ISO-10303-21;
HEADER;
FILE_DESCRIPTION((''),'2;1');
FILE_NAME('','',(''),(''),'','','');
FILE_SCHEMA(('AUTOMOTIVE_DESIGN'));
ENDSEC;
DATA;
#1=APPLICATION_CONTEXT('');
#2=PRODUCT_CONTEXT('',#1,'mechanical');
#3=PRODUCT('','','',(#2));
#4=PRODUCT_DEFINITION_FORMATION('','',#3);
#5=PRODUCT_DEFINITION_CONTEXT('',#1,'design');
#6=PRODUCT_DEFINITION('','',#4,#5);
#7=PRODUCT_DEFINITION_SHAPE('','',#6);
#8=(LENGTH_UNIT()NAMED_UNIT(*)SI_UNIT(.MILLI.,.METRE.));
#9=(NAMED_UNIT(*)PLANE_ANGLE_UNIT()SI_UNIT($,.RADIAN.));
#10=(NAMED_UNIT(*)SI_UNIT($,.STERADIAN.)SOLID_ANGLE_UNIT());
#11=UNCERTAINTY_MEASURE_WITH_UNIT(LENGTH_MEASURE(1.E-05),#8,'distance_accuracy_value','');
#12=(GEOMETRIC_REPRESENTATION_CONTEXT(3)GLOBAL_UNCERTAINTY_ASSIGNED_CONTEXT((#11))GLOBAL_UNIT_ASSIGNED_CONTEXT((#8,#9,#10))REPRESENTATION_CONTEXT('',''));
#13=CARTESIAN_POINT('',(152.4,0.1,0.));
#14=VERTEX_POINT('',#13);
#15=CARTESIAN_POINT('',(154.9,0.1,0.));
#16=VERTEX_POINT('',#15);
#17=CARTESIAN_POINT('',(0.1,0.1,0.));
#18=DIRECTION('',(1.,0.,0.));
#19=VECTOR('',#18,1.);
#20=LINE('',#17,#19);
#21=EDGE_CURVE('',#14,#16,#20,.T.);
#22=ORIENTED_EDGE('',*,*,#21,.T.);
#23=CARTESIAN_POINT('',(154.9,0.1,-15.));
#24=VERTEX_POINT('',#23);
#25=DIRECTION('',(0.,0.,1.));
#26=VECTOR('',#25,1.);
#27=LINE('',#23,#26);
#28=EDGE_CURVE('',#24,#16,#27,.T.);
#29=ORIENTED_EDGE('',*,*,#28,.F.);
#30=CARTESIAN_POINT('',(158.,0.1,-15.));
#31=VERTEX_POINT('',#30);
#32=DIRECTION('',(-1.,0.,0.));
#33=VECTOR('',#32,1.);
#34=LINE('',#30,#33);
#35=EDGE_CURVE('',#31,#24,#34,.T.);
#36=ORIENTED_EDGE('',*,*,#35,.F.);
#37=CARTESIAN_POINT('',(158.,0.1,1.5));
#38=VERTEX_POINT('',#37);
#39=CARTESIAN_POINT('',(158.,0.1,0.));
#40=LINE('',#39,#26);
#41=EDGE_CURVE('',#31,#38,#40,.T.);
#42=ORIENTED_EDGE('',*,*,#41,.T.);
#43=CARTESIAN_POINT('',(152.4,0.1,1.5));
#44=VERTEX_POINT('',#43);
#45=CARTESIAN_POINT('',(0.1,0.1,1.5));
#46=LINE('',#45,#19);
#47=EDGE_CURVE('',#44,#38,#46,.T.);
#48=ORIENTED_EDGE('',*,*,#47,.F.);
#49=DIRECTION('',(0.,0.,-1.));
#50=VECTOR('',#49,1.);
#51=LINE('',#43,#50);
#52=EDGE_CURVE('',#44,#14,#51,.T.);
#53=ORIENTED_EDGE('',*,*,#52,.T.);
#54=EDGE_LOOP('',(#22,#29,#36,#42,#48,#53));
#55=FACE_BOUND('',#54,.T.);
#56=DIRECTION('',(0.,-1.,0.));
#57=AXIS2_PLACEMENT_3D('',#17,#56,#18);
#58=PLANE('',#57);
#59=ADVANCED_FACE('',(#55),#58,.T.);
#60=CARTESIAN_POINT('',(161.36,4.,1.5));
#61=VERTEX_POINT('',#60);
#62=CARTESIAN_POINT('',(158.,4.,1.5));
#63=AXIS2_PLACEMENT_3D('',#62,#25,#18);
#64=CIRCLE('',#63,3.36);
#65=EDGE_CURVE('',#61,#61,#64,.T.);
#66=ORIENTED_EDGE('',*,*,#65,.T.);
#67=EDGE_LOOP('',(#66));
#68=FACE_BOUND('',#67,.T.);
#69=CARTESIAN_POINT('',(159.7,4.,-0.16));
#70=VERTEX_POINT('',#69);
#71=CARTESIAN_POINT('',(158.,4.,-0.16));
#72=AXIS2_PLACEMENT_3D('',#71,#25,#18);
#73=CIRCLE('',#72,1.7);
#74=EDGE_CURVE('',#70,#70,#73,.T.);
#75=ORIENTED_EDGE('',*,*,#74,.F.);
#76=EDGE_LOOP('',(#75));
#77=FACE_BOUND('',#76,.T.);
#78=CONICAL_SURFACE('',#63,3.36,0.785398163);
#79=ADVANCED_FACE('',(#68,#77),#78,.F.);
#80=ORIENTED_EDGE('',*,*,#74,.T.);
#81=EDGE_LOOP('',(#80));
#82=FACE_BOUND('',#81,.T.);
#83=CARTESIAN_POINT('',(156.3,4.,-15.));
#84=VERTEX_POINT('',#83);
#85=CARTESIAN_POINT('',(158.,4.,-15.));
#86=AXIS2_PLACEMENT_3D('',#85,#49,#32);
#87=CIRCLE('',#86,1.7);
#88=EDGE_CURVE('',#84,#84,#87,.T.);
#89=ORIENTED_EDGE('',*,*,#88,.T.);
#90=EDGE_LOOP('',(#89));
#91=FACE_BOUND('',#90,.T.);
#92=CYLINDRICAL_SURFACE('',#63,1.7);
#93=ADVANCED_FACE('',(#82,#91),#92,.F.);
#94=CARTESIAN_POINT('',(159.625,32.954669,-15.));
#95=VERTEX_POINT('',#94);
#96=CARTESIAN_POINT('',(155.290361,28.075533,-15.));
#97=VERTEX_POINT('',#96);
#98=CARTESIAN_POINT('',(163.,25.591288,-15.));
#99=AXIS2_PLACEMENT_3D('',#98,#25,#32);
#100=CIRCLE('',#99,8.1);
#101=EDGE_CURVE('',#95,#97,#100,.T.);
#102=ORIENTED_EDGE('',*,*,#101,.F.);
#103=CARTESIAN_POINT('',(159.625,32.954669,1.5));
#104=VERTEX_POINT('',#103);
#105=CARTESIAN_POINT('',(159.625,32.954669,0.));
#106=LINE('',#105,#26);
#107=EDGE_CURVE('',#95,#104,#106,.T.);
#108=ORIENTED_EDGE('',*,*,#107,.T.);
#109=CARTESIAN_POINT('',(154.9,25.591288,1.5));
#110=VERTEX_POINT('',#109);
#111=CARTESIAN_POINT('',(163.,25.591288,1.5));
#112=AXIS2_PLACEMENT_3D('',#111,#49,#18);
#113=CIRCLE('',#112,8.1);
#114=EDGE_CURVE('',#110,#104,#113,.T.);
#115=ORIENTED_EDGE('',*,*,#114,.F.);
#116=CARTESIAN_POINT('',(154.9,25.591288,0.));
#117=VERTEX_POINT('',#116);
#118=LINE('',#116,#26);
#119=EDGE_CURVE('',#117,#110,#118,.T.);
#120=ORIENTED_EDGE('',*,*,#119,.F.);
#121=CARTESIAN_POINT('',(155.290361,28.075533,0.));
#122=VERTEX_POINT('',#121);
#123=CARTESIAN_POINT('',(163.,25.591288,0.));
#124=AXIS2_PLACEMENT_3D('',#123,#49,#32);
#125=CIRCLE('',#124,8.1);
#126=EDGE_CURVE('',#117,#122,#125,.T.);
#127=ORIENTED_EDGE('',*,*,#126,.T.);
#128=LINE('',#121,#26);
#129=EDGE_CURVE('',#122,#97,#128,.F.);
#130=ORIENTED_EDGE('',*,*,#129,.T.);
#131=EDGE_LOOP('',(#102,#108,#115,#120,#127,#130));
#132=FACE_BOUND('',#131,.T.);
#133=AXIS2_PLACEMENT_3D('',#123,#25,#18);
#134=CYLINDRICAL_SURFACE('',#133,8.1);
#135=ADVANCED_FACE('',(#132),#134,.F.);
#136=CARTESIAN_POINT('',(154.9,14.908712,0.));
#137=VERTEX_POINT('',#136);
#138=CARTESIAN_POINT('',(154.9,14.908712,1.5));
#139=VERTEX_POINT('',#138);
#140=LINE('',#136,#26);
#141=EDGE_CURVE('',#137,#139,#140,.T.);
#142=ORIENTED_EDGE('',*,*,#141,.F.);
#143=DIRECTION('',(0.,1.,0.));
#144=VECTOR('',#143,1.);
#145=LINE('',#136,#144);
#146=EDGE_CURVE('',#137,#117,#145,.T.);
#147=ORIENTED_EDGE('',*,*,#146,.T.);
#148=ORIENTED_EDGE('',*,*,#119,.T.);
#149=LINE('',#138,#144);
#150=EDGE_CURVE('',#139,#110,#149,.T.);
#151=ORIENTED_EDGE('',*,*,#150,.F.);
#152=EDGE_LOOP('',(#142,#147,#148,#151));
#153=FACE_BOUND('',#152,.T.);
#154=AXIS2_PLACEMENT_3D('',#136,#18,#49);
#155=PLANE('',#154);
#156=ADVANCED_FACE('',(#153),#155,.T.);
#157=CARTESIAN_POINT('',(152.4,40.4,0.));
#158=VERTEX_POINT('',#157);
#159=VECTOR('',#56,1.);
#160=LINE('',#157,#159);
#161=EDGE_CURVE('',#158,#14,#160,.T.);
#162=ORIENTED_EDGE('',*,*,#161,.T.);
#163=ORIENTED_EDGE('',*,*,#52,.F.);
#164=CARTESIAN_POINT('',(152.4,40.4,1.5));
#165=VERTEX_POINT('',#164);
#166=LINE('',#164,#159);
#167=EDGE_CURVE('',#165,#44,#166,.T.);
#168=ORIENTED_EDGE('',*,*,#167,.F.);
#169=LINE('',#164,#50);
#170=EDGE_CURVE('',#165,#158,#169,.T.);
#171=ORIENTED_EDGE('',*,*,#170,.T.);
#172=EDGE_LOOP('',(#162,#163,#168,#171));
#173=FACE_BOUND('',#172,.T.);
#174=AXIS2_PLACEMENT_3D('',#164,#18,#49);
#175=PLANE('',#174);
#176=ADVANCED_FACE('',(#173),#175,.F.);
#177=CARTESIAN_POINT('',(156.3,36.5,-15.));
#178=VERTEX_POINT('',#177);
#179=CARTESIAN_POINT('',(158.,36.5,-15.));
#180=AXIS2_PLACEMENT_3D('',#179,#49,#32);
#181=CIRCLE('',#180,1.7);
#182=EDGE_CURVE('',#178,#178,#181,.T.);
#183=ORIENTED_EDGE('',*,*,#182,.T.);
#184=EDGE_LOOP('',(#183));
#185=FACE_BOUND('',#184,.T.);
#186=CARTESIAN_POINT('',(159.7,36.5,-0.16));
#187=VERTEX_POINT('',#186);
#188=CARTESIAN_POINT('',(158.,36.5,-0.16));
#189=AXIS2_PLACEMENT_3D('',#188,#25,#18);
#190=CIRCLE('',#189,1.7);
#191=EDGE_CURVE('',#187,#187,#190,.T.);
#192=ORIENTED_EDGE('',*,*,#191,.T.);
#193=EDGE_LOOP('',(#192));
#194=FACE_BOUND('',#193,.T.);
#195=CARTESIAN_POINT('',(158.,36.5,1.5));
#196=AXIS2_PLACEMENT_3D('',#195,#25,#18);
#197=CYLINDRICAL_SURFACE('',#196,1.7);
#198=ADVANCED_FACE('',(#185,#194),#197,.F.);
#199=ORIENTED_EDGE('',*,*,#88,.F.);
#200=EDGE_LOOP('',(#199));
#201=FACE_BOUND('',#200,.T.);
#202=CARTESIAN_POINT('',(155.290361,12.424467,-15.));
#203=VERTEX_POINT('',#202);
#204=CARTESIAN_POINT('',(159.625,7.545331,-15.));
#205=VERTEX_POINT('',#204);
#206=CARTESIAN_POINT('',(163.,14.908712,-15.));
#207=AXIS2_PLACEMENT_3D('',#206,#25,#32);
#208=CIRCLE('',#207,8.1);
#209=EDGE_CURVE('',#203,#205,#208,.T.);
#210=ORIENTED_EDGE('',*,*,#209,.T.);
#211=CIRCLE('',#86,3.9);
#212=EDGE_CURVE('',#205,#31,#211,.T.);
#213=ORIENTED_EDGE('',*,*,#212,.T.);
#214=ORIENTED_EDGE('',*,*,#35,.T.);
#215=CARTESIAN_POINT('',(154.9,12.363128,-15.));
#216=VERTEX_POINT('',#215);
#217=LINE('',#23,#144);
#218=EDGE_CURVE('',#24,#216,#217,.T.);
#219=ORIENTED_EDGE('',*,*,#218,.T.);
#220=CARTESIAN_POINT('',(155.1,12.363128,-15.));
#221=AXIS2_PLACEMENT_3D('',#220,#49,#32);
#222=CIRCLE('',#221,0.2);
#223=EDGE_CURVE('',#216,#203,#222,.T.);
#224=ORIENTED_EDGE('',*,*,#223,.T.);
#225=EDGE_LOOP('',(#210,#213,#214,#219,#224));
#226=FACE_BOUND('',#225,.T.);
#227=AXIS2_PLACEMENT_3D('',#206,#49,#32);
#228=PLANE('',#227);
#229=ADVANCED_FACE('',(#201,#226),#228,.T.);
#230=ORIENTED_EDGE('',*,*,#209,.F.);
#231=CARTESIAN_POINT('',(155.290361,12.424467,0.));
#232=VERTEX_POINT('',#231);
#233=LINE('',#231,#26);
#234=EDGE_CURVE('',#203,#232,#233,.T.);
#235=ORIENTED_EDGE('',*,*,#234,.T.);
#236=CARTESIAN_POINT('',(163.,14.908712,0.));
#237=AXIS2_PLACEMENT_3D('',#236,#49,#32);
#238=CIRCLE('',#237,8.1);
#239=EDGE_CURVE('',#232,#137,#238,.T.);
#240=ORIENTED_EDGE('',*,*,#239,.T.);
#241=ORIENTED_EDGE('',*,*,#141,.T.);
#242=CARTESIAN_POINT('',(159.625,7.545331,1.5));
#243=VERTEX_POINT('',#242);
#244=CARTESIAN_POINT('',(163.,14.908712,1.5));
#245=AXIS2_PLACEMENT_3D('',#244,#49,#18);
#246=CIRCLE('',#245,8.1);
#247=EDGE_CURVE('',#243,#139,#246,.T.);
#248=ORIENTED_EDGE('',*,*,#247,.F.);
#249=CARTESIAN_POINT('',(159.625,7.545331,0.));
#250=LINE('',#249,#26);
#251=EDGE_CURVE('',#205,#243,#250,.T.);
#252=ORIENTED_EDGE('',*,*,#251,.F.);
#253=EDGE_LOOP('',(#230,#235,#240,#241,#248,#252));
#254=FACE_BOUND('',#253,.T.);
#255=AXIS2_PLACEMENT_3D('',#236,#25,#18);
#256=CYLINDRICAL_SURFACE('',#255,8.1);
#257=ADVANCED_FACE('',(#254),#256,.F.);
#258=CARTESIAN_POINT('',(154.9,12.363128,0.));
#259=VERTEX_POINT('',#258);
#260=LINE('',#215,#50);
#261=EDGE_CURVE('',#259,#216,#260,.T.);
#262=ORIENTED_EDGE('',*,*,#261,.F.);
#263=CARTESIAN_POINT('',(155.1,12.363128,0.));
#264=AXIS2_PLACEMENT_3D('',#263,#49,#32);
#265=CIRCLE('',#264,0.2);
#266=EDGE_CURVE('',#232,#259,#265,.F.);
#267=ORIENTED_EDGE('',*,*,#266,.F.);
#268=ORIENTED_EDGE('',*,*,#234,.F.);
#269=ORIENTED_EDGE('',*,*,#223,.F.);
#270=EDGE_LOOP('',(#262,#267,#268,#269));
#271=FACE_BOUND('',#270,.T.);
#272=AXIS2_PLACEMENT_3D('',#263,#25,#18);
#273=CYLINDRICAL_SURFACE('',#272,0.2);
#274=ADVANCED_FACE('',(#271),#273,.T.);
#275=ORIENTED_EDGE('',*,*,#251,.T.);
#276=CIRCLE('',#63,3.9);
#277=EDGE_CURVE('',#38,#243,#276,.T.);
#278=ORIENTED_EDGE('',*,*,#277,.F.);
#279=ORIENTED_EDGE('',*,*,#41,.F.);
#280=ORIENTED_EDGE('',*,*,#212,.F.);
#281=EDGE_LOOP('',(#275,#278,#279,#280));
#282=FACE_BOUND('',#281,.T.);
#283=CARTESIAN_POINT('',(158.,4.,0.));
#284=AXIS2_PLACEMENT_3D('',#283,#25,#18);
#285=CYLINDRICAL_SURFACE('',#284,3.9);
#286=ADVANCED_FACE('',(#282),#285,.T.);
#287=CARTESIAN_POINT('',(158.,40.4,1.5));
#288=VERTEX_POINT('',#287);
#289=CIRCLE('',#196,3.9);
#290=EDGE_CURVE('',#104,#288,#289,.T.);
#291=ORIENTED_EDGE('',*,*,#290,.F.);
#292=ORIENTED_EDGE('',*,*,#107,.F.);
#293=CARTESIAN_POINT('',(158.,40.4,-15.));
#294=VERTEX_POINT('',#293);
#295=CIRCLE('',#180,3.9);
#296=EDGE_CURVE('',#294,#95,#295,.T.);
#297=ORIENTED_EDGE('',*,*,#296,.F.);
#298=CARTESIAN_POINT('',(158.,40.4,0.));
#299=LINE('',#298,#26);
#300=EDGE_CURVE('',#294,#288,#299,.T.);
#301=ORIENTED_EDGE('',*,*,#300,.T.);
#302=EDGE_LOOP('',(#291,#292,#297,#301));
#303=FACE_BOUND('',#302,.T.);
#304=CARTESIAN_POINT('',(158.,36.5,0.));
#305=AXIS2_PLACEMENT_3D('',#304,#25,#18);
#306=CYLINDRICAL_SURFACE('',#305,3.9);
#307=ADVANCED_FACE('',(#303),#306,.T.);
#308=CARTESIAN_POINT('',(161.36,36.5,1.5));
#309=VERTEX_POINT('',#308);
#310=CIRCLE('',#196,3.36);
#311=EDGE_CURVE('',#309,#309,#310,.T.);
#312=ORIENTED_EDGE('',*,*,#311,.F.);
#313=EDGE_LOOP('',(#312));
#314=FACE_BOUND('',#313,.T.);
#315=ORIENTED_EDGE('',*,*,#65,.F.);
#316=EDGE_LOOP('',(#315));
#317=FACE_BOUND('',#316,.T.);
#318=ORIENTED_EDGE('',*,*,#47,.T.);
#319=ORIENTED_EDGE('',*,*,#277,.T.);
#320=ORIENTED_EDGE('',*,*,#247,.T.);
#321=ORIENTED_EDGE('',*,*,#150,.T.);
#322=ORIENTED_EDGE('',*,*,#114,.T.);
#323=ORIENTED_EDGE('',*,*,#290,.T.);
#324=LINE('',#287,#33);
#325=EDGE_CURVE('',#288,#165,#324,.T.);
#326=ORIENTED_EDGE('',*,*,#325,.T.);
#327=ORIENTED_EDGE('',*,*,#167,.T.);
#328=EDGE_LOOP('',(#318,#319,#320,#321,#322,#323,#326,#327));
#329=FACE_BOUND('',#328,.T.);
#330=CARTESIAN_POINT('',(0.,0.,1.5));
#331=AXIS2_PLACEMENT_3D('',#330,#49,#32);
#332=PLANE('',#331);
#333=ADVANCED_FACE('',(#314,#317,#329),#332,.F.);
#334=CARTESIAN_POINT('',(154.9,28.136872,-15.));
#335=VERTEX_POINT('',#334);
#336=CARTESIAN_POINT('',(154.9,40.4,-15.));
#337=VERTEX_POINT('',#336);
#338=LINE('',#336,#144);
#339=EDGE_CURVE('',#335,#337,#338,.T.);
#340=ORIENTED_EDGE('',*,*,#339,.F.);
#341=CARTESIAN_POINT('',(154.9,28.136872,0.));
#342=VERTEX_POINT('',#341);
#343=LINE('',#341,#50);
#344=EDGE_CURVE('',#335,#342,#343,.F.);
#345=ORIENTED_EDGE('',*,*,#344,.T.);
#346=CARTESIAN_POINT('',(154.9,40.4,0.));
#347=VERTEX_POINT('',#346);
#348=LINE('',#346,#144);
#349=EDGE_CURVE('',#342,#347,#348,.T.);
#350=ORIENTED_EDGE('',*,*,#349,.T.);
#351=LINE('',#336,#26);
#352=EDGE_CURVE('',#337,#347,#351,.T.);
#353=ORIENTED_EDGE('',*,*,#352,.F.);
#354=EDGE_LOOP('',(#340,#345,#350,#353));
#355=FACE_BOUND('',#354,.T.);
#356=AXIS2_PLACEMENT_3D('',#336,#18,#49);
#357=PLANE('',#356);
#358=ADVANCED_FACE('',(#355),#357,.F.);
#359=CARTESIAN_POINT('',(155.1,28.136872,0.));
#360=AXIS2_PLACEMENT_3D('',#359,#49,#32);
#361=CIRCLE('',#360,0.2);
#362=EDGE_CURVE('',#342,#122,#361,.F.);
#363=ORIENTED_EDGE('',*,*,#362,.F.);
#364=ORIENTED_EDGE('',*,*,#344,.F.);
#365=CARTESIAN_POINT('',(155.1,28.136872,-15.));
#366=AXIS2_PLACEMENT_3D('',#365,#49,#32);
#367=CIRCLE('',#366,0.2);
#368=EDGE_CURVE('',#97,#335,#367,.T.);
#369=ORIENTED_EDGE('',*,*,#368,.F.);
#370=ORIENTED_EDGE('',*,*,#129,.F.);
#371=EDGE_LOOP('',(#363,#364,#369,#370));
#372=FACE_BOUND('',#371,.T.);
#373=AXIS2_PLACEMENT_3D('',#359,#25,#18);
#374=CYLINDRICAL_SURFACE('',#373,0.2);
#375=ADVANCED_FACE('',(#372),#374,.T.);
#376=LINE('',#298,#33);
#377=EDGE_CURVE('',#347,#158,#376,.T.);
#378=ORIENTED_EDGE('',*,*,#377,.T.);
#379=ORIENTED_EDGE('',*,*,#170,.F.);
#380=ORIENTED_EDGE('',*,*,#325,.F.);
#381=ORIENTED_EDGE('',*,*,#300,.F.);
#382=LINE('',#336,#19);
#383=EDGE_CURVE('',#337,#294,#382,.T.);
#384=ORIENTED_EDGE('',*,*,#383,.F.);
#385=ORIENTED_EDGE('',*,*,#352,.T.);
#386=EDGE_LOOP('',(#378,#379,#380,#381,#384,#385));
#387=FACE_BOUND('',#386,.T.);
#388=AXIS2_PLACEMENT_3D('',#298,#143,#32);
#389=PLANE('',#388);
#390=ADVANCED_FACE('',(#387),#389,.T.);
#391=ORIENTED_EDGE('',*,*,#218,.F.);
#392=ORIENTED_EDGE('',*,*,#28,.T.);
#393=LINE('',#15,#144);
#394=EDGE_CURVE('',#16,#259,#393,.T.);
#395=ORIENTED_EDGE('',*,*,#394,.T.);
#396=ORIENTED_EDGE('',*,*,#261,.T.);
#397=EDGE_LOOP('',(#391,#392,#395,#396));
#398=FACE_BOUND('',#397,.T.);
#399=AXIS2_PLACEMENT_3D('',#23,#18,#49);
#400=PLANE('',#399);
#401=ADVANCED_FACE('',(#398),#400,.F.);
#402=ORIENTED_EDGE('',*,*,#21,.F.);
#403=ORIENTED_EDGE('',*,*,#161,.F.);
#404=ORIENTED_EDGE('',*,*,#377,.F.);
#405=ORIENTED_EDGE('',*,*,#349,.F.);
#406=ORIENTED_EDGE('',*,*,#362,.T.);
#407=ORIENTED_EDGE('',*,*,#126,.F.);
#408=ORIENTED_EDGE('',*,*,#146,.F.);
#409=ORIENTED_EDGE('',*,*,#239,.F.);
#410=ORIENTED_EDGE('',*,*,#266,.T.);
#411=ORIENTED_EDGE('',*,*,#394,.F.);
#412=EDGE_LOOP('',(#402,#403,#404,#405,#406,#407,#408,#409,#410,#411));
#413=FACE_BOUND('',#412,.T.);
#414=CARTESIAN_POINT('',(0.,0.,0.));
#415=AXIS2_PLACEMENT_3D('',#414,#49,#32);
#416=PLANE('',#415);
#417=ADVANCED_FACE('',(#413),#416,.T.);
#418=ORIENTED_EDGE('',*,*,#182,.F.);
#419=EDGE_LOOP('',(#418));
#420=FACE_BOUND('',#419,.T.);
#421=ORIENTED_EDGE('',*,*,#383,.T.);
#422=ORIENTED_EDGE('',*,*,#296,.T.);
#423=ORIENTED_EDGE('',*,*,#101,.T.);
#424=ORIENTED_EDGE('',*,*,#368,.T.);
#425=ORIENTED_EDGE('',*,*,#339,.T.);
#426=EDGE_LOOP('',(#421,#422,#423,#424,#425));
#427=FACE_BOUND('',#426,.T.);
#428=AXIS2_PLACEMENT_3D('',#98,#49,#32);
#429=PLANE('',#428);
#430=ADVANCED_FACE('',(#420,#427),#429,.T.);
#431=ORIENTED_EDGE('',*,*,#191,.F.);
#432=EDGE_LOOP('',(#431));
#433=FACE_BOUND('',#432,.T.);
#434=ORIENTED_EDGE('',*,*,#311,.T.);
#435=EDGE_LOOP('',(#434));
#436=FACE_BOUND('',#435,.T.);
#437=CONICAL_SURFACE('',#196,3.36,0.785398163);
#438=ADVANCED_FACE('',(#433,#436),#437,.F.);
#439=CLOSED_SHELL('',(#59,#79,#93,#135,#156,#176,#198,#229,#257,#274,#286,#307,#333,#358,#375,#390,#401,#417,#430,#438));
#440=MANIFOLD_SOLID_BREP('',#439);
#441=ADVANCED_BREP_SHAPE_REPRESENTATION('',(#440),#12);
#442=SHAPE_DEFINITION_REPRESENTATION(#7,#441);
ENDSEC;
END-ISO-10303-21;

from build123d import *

# Parameters (mm, degrees)
SKETCH_1_W                  = 155
SKETCH_1_H                  = 40.5
EXTRUDE_1_DEPTH             = 1.5
EXTRUDE_2_DEPTH             = 1.5
FILLET_2_R                  = 8
CUT_EXTRUDE_1_DEPTH         = 167.992514924
SKETCH_5_W                  = 152.3
SKETCH_5_H                  = 40.3
CUT_EXTRUDE_2_DEPTH         = 167.871267749
EXTRUDE_3_DEPTH             = 15
FILLET_START                = -16
FILLET_3_DEPTH              = 16
HOLE_WIZARD_M31_D           = 3.4
HOLE_WIZARD_M31_CSINK_D     = 6.72
HOLE_WIZARD_M31_CSINK_ANGLE = 90


with BuildPart() as part:
    # Эскиз1 → Бобышка-Вытянуть1 (new body)
    with BuildSketch(Plane.XY):
        with Locations((77.5, 20.25)):
            Rectangle(SKETCH_1_W, SKETCH_1_H)
    extrude(amount=EXTRUDE_1_DEPTH)

    # Эскиз2 → Бобышка-Вытянуть2 (add)
    with BuildSketch(Plane(origin=(0, 0, 0), x_dir=(-1, 0, 0), z_dir=(0, 0, -1))):
        with BuildLine():
            Line((-158, 0), (-155, 0))
            Line((-155, 0), (-155, 8))
            Line((-155, 8), (-158, 8))
            ThreePointArc((-158, 8), (-162, 4), (-158, 0))
        make_face()
        with BuildLine():
            Line((-155, 32.5), (-155, 40.5))
            Line((-155, 40.5), (-158, 40.5))
            ThreePointArc((-158, 40.5), (-162, 36.5), (-158, 32.5))
            Line((-158, 32.5), (-155, 32.5))
        make_face()
    extrude(amount=-EXTRUDE_2_DEPTH)

    # Скругление2
    fillet_2_edges = [part.edges().sort_by_distance(p)[0] for p in [
        (155, 8, 0.75),
        (155, 32.5, 0.75),
    ]]
    fillet(fillet_2_edges, radius=FILLET_2_R)

    # Эскиз3 → Вырез-Вытянуть1 (cut, through all)
    with BuildSketch(Plane.XY.offset(1.5)):
        with BuildLine():
            Line((155, 14.908712115), (155, 25.591287885))
            ThreePointArc((155, 25.591287885), (156.266996708, 29.911781684), (159.666666667, 32.863762628))
            ThreePointArc((159.666666667, 32.863762628), (161.908001374, 37.352950911), (158, 40.5))
            Line((158, 40.5), (0, 40.5))
            Line((0, 40.5), (0, 0))
            Line((0, 0), (158, 0))
            ThreePointArc((158, 0), (161.908001374, 3.147049089), (159.666666667, 7.636237372))
            ThreePointArc((159.666666667, 7.636237372), (156.266996708, 10.588218316), (155, 14.908712115))
        make_face()
        with BuildLine():
            Line((154.9, 14.908712115), (154.9, 25.591287885))
            ThreePointArc((154.9, 25.591287885), (156.182834167, 29.965787857), (159.625, 32.954668563))
            ThreePointArc((159.625, 32.954668563), (161.81030134, 37.331627138), (158, 40.4))
            Line((158, 40.4), (0.1, 40.4))
            Line((0.1, 40.4), (0.1, 0.1))
            Line((0.1, 0.1), (158, 0.1))
            ThreePointArc((158, 0.1), (161.81030134, 3.168372862), (159.625, 7.545331437))
            ThreePointArc((159.625, 7.545331437), (156.182834167, 10.534212143), (154.9, 14.908712115))
        make_face(mode=Mode.SUBTRACT)
    extrude(amount=-CUT_EXTRUDE_1_DEPTH, mode=Mode.SUBTRACT)

    # Эскиз5 → Вырез-Вытянуть2 (cut, through all)
    with BuildSketch(Plane(origin=(0, 0, 0), x_dir=(-1, 0, 0), z_dir=(0, 0, -1))):
        with Locations((-76.25, 20.25)):
            Rectangle(SKETCH_5_W, SKETCH_5_H)
    extrude(amount=-CUT_EXTRUDE_2_DEPTH, mode=Mode.SUBTRACT)

    # Эскиз6 → Бобышка-Вытянуть3 (add)
    with BuildSketch(Plane(origin=(0, 0, 0), x_dir=(-1, 0, 0), z_dir=(0, 0, -1))):
        with BuildLine():
            Line((-154.9, 40.4), (-154.9, 25.591287885))
            ThreePointArc((-154.9, 25.591287885), (-156.182834167, 29.965787857), (-159.625, 32.954668563))
            ThreePointArc((-159.625, 32.954668563), (-161.81030134, 37.331627138), (-158, 40.4))
            Line((-158, 40.4), (-154.9, 40.4))
        make_face()
        with BuildLine():
            Line((-154.9, 0.1), (-154.9, 14.908712115))
            ThreePointArc((-154.9, 14.908712115), (-156.182834167, 10.534212143), (-159.625, 7.545331437))
            ThreePointArc((-159.625, 7.545331437), (-161.81030134, 3.168372862), (-158, 0.1))
            Line((-158, 0.1), (-154.9, 0.1))
        make_face()
    extrude(amount=EXTRUDE_3_DEPTH)

    # Скругление3: read off the stored shape, not the designer's step
    # Скругление3 outline → Скругление3 (cut)
    with BuildSketch(Plane.XY.offset(FILLET_START)):
        with BuildLine():
            ThreePointArc((154.9, 12.363127702), (155.068953979, 12.56070337), (155.290361446, 12.424467086))
            ThreePointArc((155.290361446, 12.424467086), (154.998185447, 13.651348263), (154.9, 14.908712115))
            Line((154.9, 14.908712115), (154.9, 12.363127702))
        make_face()
        with BuildLine():
            ThreePointArc((155.290361446, 28.075532914), (155.068953979, 27.93929663), (154.9, 28.136872298))
            Line((154.9, 28.136872298), (154.9, 25.591287885))
            ThreePointArc((154.9, 25.591287885), (154.998185447, 26.848651737), (155.290361446, 28.075532914))
        make_face()
    extrude(amount=FILLET_3_DEPTH, mode=Mode.SUBTRACT)

    # Зенковка для  винта с потайной головкой с внутренним шестигранником M31 (through all)
    with Locations(Plane.XY.offset(1.5)):
        with Locations((158, 36.5), (158, 4)):
            CounterSinkHole(HOLE_WIZARD_M31_D / 2, HOLE_WIZARD_M31_CSINK_D / 2, counter_sink_angle=HOLE_WIZARD_M31_CSINK_ANGLE)


solid = part.part
